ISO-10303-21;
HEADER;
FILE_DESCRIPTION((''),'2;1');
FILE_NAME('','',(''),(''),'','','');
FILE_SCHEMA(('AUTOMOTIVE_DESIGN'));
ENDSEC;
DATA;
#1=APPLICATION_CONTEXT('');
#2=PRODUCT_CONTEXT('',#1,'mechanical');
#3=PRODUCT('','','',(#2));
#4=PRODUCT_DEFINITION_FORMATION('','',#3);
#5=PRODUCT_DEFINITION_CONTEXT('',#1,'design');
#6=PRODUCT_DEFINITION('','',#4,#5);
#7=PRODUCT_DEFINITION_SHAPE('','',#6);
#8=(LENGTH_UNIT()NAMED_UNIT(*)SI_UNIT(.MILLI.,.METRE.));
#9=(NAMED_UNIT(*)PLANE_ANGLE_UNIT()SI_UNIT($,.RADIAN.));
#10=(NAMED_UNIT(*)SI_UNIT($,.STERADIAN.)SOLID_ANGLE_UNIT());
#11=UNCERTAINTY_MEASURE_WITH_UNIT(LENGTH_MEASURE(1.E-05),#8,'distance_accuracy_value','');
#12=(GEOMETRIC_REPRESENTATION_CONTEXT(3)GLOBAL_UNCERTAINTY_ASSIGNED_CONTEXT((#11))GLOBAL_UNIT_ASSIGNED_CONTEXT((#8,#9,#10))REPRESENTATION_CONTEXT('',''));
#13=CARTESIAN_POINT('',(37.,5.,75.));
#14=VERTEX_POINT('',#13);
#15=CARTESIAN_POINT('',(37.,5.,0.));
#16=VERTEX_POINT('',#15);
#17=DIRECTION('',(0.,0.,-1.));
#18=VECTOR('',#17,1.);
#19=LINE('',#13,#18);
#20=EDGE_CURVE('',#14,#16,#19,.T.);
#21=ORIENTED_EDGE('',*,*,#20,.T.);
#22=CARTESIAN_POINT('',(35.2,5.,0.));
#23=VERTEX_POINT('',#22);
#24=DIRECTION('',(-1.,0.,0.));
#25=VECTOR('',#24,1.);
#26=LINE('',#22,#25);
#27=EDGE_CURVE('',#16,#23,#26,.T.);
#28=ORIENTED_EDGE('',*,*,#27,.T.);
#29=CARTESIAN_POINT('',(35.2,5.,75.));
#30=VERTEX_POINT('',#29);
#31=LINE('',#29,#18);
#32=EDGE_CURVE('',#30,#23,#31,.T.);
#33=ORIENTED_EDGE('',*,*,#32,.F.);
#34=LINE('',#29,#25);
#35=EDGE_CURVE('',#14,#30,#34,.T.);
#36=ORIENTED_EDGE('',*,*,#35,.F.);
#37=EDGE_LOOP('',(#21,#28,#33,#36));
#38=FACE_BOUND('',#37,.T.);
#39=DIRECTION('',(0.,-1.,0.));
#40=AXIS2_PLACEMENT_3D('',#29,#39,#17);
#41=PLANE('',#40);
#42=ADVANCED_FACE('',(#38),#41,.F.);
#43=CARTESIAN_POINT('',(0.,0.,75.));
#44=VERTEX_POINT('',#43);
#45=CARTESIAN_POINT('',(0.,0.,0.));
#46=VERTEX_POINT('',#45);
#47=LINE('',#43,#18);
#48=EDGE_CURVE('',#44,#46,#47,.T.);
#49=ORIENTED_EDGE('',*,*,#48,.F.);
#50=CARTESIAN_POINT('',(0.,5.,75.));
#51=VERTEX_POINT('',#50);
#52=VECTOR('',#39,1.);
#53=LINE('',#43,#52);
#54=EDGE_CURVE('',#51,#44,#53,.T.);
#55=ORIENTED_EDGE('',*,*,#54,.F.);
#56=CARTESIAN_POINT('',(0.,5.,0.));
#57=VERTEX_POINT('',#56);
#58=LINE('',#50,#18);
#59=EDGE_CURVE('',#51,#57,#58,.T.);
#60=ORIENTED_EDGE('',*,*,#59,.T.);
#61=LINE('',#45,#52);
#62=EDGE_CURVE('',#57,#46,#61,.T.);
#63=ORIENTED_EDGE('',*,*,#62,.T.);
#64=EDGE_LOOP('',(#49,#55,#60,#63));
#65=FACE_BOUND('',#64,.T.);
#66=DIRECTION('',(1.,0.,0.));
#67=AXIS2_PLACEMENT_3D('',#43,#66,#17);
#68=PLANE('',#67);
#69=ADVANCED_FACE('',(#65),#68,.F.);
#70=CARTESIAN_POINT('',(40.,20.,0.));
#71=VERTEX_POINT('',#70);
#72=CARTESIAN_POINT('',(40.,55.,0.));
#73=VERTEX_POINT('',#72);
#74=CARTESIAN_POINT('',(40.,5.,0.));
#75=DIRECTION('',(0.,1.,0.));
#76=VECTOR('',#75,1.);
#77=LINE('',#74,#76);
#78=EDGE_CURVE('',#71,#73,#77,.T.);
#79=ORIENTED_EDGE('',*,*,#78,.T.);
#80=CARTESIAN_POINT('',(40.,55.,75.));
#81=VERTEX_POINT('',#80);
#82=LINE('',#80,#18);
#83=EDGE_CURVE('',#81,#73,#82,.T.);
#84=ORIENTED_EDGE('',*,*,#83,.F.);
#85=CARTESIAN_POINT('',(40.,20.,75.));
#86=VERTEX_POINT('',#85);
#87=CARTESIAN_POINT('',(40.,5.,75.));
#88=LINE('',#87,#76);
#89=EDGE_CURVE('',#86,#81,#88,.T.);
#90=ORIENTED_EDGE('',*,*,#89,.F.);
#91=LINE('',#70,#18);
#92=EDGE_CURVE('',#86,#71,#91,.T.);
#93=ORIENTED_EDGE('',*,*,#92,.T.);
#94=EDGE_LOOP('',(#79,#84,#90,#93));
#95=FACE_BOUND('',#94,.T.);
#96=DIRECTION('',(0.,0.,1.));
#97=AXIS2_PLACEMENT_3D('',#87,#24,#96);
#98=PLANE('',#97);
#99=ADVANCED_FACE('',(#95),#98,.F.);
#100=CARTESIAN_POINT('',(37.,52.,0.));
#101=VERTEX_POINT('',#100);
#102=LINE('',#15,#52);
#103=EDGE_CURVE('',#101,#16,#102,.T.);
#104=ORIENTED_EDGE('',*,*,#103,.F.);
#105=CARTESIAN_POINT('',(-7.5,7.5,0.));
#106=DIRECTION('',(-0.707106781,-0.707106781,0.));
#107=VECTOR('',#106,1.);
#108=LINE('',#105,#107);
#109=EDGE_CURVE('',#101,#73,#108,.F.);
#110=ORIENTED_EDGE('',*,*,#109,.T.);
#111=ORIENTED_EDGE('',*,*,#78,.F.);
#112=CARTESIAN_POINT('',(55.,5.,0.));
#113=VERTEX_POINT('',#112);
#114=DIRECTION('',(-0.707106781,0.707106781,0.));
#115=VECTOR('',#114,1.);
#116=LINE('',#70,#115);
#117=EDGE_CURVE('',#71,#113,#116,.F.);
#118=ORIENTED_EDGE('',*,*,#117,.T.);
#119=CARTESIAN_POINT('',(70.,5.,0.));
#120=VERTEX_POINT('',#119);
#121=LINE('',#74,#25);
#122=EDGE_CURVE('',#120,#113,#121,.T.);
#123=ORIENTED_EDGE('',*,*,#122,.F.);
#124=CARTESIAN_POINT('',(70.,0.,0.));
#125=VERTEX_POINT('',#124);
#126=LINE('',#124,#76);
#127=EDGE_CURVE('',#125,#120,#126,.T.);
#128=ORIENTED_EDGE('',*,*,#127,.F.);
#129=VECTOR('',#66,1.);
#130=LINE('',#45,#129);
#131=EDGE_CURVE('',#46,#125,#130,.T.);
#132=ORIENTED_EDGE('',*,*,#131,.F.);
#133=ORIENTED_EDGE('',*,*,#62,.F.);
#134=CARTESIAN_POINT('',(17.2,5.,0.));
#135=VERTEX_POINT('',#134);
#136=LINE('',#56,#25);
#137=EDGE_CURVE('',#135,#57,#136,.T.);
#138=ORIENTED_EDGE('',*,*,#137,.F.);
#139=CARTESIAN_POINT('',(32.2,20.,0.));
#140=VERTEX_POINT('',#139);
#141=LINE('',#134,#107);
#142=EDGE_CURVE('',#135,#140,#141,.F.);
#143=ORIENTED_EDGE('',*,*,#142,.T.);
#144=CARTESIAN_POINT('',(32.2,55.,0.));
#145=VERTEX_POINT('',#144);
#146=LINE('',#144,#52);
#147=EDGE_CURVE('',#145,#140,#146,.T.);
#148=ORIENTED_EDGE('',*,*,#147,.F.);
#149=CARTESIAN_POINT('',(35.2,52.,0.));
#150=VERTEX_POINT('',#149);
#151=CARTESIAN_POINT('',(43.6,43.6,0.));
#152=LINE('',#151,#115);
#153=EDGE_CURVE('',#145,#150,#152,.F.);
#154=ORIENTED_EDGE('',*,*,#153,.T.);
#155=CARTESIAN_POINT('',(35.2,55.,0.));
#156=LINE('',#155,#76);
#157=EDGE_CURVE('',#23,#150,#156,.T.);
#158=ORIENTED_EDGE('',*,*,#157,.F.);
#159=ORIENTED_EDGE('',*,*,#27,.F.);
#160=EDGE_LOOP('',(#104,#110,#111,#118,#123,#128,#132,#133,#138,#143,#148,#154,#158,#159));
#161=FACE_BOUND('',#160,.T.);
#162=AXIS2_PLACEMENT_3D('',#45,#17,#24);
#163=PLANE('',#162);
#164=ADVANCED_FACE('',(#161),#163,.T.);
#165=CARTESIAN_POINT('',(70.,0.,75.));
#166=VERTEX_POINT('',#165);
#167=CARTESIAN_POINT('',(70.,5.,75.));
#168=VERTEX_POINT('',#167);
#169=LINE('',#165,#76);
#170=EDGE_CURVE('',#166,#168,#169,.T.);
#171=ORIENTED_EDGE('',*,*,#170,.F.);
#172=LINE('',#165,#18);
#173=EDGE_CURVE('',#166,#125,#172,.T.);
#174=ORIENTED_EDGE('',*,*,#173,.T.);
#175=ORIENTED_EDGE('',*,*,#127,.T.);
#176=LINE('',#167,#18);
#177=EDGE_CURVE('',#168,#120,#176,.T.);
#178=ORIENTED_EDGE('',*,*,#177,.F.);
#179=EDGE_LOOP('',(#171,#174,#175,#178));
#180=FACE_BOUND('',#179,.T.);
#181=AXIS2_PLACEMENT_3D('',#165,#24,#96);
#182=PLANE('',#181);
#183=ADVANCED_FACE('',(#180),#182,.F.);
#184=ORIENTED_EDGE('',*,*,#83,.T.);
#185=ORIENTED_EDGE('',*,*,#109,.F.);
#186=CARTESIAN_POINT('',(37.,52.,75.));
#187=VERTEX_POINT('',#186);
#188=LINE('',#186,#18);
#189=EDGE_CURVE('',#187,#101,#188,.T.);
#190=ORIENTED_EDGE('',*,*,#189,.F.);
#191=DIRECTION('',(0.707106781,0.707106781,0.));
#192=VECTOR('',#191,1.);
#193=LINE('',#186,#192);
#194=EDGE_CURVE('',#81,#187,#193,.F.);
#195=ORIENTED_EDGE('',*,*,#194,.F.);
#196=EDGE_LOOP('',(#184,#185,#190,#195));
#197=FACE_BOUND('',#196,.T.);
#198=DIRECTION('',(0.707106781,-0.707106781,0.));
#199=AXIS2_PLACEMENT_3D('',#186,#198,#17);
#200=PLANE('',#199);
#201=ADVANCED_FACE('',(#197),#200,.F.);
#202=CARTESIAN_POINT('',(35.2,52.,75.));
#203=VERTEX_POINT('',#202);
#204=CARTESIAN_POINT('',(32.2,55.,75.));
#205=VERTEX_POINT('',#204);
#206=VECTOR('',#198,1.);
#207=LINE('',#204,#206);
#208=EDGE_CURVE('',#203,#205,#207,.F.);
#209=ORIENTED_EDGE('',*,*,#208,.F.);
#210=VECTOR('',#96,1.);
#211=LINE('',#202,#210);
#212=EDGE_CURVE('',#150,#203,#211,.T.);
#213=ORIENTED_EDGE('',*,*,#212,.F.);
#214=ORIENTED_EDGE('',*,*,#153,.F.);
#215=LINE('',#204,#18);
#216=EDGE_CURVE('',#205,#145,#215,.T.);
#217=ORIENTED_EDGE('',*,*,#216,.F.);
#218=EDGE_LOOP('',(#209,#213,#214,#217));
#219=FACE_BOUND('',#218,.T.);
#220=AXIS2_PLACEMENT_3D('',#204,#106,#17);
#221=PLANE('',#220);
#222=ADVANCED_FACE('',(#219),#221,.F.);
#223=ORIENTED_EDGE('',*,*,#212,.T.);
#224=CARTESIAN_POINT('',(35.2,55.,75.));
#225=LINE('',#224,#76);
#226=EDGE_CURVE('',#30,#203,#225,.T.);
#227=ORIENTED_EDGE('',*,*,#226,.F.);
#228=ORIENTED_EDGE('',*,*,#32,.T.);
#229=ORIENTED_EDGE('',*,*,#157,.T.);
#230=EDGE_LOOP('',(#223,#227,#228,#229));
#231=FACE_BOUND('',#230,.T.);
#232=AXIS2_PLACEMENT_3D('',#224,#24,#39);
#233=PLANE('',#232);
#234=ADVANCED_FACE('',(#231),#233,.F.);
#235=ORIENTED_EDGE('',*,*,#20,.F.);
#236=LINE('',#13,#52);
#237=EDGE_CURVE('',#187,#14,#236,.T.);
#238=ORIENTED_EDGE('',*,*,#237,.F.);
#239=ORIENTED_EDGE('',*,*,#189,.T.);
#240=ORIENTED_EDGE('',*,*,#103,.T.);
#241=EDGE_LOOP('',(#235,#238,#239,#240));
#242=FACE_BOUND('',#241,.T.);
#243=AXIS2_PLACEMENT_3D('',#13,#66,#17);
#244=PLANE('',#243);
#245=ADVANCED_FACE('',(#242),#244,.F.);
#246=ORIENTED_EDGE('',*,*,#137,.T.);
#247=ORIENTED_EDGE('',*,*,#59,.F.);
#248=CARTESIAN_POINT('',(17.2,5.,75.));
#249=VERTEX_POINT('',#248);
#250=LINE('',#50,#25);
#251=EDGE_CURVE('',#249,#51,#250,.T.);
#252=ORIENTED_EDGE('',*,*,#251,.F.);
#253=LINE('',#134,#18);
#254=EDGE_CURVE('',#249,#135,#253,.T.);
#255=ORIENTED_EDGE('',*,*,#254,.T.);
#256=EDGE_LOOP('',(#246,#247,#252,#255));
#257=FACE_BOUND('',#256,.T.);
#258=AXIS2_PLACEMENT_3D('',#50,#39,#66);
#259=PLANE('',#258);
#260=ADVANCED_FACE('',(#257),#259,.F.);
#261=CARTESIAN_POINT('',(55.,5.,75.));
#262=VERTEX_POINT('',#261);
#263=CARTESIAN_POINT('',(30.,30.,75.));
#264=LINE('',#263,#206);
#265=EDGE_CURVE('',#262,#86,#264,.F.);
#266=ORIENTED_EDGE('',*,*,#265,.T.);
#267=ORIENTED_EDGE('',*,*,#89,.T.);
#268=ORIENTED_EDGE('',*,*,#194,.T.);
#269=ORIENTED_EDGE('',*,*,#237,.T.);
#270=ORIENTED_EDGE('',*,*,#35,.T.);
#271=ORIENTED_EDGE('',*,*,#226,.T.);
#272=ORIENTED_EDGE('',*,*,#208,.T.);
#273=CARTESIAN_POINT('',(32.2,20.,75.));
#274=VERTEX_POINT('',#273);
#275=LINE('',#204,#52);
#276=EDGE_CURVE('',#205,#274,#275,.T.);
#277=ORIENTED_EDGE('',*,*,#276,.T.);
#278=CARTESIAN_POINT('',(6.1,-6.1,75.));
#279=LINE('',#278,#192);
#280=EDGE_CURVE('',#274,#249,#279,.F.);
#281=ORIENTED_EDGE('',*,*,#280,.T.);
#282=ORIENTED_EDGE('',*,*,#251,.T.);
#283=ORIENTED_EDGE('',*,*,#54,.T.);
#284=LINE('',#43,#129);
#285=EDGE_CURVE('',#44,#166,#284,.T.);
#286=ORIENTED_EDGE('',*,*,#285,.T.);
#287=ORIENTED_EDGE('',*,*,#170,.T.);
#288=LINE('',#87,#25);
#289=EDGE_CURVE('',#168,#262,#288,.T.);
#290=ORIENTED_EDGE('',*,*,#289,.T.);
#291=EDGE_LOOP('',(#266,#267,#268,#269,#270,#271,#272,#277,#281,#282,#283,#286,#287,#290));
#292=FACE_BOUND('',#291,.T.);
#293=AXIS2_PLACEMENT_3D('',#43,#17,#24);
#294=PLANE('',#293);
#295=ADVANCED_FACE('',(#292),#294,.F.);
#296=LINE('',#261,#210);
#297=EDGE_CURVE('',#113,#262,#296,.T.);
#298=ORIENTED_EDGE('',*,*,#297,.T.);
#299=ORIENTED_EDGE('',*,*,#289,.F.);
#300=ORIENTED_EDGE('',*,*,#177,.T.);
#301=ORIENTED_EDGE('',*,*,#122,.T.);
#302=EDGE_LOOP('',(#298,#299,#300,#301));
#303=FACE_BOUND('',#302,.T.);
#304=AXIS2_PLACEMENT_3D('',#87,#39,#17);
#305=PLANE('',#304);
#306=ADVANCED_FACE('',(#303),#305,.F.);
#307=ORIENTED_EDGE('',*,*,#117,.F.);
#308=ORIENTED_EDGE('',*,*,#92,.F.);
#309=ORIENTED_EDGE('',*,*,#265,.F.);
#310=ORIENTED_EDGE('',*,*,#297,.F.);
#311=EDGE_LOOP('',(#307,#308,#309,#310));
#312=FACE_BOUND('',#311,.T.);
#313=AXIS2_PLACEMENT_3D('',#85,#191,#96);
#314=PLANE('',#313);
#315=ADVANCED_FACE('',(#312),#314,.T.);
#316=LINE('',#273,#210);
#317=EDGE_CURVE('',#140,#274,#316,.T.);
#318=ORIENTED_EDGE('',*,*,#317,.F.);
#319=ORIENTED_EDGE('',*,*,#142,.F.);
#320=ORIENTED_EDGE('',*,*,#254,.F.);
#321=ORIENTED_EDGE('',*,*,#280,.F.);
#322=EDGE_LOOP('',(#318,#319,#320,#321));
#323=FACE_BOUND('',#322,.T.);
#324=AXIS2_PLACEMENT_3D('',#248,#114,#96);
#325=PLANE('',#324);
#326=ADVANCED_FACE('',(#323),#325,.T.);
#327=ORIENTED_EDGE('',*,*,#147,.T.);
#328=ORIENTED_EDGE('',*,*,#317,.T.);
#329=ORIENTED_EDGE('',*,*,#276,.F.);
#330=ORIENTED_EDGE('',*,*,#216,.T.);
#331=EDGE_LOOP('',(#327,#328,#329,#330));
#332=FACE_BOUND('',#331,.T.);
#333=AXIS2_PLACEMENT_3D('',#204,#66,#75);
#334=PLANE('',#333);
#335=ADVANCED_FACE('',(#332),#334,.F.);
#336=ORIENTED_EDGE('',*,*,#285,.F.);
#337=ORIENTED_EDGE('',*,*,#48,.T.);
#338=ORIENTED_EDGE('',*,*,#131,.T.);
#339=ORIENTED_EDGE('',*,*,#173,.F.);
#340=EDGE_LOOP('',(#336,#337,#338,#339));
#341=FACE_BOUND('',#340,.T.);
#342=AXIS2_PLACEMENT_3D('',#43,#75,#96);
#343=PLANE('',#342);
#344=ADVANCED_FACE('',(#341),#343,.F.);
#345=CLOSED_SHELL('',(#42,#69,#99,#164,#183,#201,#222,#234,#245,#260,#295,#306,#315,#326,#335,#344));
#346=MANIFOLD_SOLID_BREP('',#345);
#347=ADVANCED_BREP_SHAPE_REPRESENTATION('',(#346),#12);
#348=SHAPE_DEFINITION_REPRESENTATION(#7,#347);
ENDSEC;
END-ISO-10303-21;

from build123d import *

# Parameters (mm, degrees)
EXTRUDE_1_DEPTH = 75
CHAMFER_1_SIZE  = 15
CHAMFER_2_SIZE  = 3


with BuildPart() as part:
    # 草图1 → 凸台-拉伸1 (new body)
    with BuildSketch(Plane.XY):
        Polygon((0, 0), (70, 0), (70, 5), (40, 5), (40, 55), (37, 55), (37, 5), (35.2, 5), (35.2, 55), (32.2, 55), (32.2, 5), (0, 5), align=None)
    extrude(amount=EXTRUDE_1_DEPTH)

    # 倒角1
    chamfer_1_edges = [part.edges().sort_by_distance(p)[0] for p in [
        (32.2, 5, 37.5),
        (40, 5, 37.5),
    ]]
    chamfer(chamfer_1_edges, length=CHAMFER_1_SIZE)

    # 倒角2
    chamfer_2_edges = [part.edges().sort_by_distance(p)[0] for p in [
        (37, 55, 37.5),
        (35.2, 55, 37.5),
    ]]
    chamfer(chamfer_2_edges, length=CHAMFER_2_SIZE - 0.0001)  # a hair under: the kernel refuses the full size


solid = part.part
